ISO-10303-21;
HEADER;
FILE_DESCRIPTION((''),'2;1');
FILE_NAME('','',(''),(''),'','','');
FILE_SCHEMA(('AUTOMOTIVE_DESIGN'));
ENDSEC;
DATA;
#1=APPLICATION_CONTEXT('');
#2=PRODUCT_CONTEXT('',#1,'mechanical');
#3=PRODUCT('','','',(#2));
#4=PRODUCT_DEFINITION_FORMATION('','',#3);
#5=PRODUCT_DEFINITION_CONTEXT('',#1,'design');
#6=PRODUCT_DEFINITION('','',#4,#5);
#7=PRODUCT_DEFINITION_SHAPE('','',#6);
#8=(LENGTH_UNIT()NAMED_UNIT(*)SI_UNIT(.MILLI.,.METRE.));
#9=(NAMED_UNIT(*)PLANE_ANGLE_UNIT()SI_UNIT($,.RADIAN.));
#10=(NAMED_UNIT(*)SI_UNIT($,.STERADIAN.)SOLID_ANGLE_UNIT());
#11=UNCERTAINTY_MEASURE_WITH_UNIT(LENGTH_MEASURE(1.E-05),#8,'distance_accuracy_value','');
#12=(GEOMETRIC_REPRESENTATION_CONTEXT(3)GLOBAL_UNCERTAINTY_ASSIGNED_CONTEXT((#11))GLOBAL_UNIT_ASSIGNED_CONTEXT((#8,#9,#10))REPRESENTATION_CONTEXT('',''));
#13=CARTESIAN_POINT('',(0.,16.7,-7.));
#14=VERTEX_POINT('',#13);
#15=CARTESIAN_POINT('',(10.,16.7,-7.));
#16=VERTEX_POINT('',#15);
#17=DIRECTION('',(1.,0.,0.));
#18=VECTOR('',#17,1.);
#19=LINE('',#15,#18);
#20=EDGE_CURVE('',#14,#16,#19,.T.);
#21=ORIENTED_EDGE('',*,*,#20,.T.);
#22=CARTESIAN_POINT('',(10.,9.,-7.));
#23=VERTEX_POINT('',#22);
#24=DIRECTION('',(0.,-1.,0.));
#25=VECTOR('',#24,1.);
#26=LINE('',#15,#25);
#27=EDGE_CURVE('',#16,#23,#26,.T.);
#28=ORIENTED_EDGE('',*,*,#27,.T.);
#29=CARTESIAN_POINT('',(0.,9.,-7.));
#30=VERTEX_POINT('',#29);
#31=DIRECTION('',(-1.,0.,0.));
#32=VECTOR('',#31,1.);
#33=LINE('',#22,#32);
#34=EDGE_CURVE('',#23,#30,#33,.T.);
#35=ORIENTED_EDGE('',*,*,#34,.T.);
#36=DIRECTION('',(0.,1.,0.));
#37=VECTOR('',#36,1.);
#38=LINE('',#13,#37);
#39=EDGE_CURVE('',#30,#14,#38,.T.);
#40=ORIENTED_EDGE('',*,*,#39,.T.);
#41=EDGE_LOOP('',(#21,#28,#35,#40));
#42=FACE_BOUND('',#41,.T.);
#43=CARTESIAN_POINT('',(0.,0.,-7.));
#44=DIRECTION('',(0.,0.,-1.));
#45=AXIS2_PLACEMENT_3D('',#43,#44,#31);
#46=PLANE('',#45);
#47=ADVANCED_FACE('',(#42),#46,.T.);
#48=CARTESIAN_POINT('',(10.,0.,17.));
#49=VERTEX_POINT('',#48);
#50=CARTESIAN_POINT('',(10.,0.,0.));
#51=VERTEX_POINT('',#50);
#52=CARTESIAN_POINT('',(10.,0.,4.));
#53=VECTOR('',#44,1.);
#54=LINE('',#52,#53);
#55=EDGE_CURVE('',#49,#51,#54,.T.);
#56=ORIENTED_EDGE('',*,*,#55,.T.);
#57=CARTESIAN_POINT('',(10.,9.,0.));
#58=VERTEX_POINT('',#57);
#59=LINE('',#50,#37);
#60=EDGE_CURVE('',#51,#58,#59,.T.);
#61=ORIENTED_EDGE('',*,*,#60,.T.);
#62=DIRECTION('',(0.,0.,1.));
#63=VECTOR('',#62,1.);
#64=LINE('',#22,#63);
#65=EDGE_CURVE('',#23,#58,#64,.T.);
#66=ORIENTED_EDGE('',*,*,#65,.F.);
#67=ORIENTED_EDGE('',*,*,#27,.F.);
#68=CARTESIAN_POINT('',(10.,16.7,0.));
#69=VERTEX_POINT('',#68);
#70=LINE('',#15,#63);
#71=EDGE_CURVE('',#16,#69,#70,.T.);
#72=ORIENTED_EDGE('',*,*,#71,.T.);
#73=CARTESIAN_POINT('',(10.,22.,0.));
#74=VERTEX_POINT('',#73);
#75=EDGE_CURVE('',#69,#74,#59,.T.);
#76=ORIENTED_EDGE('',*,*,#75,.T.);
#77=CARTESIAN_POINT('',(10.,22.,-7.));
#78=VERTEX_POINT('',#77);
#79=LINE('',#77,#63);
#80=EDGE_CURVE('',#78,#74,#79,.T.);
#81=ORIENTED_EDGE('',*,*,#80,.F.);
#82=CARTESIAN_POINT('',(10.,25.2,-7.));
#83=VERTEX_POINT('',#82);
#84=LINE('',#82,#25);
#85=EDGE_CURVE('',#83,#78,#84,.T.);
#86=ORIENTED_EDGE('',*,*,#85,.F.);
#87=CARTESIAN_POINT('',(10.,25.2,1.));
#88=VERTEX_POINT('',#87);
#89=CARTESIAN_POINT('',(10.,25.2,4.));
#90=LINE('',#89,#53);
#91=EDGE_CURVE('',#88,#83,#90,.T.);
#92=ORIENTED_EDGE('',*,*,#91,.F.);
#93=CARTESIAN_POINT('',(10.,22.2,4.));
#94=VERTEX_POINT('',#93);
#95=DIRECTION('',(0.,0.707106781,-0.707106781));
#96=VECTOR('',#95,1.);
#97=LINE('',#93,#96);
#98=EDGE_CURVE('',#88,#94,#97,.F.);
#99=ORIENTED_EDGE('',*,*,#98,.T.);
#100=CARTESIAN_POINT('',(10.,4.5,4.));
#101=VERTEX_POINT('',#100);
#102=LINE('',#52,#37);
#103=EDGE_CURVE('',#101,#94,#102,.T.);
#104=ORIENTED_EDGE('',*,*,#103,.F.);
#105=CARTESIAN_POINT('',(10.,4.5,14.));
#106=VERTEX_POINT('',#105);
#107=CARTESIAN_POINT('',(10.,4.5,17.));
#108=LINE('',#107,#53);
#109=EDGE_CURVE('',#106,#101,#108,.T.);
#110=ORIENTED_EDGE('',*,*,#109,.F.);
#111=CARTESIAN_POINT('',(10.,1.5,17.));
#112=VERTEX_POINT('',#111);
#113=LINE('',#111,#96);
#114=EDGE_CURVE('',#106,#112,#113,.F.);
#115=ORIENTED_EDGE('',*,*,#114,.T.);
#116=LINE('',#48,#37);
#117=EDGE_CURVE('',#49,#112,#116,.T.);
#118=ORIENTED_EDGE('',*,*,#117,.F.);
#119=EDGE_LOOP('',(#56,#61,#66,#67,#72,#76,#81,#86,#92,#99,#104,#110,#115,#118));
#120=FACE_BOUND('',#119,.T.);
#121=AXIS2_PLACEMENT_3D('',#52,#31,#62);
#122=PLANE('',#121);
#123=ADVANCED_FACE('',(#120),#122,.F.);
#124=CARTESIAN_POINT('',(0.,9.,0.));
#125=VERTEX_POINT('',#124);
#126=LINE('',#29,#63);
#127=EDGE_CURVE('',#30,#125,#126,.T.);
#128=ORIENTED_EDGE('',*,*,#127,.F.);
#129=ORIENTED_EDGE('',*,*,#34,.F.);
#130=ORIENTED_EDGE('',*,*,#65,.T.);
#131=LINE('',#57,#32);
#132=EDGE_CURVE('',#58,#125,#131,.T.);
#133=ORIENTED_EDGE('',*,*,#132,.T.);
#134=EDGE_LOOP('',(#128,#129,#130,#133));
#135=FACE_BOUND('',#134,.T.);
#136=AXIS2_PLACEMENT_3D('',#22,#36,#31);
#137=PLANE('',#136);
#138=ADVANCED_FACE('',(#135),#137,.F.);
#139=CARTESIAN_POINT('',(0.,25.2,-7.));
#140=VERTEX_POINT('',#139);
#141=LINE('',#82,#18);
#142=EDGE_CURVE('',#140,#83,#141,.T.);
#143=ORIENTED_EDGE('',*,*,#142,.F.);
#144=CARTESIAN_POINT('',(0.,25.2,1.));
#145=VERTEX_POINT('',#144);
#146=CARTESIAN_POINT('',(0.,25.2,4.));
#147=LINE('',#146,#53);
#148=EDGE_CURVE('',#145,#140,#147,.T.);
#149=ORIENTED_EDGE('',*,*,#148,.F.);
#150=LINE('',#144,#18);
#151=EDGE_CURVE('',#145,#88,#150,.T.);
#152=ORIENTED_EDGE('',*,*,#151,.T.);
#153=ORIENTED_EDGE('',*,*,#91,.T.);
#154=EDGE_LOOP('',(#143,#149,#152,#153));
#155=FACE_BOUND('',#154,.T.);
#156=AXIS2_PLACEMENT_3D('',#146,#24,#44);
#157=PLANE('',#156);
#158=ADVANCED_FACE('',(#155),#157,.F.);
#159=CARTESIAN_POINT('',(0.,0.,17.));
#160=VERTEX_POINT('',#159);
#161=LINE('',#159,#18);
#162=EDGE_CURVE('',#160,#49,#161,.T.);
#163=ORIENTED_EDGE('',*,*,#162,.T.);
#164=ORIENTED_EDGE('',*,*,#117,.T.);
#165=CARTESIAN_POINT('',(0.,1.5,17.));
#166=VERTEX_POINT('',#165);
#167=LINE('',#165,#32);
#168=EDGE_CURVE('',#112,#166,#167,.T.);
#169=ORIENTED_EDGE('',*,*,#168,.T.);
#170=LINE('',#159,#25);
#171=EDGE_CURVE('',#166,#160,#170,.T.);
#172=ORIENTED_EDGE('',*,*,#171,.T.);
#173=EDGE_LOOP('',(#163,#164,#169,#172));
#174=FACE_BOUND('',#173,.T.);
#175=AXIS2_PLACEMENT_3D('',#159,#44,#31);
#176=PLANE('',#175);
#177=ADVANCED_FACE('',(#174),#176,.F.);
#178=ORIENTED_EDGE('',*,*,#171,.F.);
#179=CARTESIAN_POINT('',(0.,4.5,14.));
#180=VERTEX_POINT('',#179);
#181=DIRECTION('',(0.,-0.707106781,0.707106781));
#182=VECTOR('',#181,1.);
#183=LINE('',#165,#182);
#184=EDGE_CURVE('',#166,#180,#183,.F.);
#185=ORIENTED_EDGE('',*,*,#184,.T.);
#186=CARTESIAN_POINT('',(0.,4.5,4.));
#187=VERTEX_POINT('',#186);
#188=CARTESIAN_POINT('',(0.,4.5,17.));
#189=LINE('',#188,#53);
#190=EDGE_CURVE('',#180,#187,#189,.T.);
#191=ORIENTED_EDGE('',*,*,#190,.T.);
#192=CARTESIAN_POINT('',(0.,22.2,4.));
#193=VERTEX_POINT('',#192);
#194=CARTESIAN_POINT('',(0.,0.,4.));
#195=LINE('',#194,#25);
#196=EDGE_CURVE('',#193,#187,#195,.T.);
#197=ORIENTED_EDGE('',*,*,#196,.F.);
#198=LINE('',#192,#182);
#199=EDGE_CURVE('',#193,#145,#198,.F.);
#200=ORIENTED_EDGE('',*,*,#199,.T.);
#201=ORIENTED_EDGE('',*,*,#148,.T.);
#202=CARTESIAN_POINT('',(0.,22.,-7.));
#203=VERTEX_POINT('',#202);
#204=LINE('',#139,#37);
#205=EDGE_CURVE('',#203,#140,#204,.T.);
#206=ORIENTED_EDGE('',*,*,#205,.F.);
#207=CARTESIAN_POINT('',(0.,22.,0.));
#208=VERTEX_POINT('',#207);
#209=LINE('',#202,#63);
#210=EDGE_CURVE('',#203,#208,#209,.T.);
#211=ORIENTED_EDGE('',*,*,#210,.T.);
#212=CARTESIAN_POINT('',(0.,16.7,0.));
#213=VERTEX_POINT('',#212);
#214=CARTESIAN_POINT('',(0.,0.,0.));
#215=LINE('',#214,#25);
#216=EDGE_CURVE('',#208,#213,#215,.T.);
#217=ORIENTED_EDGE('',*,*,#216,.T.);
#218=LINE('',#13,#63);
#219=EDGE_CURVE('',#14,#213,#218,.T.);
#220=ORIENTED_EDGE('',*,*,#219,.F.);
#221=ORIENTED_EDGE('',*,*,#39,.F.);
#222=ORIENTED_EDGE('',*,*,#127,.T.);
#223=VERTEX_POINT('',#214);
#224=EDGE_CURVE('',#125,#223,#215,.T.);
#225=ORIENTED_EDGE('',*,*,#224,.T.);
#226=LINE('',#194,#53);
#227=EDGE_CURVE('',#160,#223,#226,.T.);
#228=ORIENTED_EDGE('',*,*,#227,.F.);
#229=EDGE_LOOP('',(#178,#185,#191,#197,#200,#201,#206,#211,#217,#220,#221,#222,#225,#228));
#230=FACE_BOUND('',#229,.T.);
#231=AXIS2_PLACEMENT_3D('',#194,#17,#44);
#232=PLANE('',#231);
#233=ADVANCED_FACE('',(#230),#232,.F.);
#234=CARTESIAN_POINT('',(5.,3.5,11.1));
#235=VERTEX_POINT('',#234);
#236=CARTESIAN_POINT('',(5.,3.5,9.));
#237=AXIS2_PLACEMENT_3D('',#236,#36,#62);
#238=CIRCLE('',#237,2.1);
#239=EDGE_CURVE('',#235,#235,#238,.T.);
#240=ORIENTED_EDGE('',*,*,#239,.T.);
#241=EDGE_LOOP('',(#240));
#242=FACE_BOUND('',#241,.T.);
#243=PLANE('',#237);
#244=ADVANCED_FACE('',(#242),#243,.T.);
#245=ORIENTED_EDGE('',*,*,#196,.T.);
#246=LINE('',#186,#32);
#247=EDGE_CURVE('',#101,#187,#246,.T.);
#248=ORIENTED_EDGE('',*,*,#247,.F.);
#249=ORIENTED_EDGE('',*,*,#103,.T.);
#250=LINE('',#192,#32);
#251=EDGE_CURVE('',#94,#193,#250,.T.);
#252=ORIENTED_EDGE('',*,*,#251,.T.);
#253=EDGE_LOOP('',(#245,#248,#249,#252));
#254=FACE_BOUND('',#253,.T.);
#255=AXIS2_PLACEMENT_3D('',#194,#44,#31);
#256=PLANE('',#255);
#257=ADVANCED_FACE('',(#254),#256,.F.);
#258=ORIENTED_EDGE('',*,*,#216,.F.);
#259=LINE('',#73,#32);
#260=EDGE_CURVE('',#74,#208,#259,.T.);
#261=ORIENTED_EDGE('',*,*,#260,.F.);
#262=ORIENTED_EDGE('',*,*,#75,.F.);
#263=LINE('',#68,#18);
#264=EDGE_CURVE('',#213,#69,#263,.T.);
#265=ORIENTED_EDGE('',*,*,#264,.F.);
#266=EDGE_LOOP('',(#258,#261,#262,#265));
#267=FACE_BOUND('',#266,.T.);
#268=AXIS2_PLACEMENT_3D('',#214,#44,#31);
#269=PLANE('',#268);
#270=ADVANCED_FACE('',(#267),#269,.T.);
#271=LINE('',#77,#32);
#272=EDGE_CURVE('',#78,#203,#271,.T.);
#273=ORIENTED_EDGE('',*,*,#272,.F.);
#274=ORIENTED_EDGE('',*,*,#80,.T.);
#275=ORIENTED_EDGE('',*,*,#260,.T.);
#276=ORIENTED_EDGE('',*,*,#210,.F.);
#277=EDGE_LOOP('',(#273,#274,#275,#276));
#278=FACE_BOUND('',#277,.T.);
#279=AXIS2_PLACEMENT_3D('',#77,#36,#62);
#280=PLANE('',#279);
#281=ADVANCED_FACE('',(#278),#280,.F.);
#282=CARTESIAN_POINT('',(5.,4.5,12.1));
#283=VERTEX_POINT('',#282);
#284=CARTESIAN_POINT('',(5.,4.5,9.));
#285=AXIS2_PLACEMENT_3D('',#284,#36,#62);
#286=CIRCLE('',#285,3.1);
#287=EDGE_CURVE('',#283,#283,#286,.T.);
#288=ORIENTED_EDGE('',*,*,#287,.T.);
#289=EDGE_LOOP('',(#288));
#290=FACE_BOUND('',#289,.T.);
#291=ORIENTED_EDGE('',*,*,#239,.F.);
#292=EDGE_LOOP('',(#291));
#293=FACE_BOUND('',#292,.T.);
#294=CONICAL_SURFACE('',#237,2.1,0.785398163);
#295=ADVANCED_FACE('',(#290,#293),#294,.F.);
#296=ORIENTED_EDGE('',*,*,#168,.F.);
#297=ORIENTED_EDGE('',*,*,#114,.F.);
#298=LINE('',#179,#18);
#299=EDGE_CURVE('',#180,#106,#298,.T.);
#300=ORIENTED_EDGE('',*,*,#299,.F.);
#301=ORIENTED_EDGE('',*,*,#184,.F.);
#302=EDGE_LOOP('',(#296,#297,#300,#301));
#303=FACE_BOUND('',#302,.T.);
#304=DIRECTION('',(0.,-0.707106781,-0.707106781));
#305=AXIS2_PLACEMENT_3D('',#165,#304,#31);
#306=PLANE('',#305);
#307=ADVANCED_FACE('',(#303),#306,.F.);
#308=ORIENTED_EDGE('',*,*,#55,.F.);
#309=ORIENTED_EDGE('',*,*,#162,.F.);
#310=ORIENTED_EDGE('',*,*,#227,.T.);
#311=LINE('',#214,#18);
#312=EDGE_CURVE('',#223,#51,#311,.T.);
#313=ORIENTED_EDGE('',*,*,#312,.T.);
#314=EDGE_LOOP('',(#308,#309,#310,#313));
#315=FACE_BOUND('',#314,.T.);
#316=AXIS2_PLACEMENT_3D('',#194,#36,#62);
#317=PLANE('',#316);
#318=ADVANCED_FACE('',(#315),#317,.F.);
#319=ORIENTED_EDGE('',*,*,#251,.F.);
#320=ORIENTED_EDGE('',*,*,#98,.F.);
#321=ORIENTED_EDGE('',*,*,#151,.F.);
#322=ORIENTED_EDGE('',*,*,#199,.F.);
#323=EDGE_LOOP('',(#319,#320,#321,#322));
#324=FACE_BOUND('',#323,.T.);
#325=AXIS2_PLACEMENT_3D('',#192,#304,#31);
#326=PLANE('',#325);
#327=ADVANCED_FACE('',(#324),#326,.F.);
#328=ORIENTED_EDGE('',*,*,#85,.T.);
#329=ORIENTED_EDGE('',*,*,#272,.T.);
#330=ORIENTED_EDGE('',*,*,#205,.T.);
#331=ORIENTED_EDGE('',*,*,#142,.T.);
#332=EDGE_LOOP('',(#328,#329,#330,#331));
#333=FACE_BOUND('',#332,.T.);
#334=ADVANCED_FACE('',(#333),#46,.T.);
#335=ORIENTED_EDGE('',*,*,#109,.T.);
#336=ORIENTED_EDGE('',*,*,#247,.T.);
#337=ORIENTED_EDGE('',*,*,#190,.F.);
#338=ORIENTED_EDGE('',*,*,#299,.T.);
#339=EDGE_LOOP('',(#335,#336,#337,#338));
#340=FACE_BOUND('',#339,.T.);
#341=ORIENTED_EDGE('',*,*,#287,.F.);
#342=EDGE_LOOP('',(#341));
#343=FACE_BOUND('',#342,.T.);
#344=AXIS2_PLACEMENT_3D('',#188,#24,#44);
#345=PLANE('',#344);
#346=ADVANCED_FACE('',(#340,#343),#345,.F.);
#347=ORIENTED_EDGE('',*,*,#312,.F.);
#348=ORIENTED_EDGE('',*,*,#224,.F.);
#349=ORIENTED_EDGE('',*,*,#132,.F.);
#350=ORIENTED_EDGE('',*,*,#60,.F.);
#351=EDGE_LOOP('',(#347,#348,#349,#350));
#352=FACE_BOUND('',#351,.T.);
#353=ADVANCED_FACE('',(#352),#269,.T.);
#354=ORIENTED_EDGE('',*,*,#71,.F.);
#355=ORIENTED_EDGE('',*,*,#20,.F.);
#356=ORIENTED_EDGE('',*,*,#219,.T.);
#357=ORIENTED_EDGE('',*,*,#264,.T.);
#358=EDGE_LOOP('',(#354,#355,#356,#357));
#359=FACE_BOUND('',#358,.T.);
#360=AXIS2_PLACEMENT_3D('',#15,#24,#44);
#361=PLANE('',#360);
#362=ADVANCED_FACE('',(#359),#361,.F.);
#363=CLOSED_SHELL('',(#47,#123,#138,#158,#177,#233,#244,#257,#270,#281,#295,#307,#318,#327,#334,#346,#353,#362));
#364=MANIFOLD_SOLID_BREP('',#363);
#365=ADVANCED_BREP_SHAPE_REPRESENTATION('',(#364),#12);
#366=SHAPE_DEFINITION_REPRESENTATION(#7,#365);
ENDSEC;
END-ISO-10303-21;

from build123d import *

# Parameters (mm, degrees)
SKETCH1_W           = 10
SKETCH1_H           = 25.2
BOSS_EXTRUDE1_DEPTH = 4
SKETCH2_W           = 10
SKETCH2_H           = 3.2
SKETCH2_H_2         = 7.7
BOSS_EXTRUDE2_DEPTH = 7
SKETCH3_W           = 10
SKETCH3_H           = 4.5
BOSS_EXTRUDE3_DEPTH = 13
SKETCH4_R           = 3.1
CUT_EXTRUDE2_DEPTH  = 1
CHAMFER2_SIZE       = 1
CHAMFER3_SIZE       = 3


with BuildPart() as part:
    # Sketch1 → Boss-Extrude1 (new body)
    with BuildSketch(Plane.XY):
        with Locations((5, 12.6)):
            Rectangle(SKETCH1_W, SKETCH1_H)
    extrude(amount=BOSS_EXTRUDE1_DEPTH)

    # Sketch2 → Boss-Extrude2 (add)
    with BuildSketch(Plane(origin=(0, 0, 0), x_dir=(-1, 0, 0), z_dir=(0, 0, -1))):
        with Locations((-5, 23.6)):
            Rectangle(SKETCH2_W, SKETCH2_H)
        with Locations((-5, 12.85)):
            Rectangle(SKETCH2_W, SKETCH2_H_2)
    extrude(amount=BOSS_EXTRUDE2_DEPTH)

    # Sketch3 → Boss-Extrude3 (add)
    with BuildSketch(Plane.XY.offset(4)):
        with Locations((5, 2.25)):
            Rectangle(SKETCH3_W, SKETCH3_H)
    extrude(amount=BOSS_EXTRUDE3_DEPTH)

    # Sketch4 → Cut-Extrude2 (cut)
    with BuildSketch(Plane(origin=(0, 4.5, 0), x_dir=(1, 0, 0), z_dir=(0, 1, 0))):
        with Locations(Location((5, -9, 0), (0, 0, 270))):
            Circle(SKETCH4_R)
    extrude(amount=-CUT_EXTRUDE2_DEPTH, mode=Mode.SUBTRACT)

    # Chamfer2
    chamfer2_edges = [part.edges().sort_by_distance(p)[0] for p in [
        (5, 3.5, 5.9),
    ]]
    chamfer(chamfer2_edges, length=CHAMFER2_SIZE - 0.0001)  # a hair under: the kernel refuses the full size

    # Chamfer3
    chamfer3_edges = [part.edges().sort_by_distance(p)[0] for p in [
        (5, 25.2, 4),
        (5, 4.5, 17),
    ]]
    chamfer(chamfer3_edges, length=CHAMFER3_SIZE)


solid = part.part
